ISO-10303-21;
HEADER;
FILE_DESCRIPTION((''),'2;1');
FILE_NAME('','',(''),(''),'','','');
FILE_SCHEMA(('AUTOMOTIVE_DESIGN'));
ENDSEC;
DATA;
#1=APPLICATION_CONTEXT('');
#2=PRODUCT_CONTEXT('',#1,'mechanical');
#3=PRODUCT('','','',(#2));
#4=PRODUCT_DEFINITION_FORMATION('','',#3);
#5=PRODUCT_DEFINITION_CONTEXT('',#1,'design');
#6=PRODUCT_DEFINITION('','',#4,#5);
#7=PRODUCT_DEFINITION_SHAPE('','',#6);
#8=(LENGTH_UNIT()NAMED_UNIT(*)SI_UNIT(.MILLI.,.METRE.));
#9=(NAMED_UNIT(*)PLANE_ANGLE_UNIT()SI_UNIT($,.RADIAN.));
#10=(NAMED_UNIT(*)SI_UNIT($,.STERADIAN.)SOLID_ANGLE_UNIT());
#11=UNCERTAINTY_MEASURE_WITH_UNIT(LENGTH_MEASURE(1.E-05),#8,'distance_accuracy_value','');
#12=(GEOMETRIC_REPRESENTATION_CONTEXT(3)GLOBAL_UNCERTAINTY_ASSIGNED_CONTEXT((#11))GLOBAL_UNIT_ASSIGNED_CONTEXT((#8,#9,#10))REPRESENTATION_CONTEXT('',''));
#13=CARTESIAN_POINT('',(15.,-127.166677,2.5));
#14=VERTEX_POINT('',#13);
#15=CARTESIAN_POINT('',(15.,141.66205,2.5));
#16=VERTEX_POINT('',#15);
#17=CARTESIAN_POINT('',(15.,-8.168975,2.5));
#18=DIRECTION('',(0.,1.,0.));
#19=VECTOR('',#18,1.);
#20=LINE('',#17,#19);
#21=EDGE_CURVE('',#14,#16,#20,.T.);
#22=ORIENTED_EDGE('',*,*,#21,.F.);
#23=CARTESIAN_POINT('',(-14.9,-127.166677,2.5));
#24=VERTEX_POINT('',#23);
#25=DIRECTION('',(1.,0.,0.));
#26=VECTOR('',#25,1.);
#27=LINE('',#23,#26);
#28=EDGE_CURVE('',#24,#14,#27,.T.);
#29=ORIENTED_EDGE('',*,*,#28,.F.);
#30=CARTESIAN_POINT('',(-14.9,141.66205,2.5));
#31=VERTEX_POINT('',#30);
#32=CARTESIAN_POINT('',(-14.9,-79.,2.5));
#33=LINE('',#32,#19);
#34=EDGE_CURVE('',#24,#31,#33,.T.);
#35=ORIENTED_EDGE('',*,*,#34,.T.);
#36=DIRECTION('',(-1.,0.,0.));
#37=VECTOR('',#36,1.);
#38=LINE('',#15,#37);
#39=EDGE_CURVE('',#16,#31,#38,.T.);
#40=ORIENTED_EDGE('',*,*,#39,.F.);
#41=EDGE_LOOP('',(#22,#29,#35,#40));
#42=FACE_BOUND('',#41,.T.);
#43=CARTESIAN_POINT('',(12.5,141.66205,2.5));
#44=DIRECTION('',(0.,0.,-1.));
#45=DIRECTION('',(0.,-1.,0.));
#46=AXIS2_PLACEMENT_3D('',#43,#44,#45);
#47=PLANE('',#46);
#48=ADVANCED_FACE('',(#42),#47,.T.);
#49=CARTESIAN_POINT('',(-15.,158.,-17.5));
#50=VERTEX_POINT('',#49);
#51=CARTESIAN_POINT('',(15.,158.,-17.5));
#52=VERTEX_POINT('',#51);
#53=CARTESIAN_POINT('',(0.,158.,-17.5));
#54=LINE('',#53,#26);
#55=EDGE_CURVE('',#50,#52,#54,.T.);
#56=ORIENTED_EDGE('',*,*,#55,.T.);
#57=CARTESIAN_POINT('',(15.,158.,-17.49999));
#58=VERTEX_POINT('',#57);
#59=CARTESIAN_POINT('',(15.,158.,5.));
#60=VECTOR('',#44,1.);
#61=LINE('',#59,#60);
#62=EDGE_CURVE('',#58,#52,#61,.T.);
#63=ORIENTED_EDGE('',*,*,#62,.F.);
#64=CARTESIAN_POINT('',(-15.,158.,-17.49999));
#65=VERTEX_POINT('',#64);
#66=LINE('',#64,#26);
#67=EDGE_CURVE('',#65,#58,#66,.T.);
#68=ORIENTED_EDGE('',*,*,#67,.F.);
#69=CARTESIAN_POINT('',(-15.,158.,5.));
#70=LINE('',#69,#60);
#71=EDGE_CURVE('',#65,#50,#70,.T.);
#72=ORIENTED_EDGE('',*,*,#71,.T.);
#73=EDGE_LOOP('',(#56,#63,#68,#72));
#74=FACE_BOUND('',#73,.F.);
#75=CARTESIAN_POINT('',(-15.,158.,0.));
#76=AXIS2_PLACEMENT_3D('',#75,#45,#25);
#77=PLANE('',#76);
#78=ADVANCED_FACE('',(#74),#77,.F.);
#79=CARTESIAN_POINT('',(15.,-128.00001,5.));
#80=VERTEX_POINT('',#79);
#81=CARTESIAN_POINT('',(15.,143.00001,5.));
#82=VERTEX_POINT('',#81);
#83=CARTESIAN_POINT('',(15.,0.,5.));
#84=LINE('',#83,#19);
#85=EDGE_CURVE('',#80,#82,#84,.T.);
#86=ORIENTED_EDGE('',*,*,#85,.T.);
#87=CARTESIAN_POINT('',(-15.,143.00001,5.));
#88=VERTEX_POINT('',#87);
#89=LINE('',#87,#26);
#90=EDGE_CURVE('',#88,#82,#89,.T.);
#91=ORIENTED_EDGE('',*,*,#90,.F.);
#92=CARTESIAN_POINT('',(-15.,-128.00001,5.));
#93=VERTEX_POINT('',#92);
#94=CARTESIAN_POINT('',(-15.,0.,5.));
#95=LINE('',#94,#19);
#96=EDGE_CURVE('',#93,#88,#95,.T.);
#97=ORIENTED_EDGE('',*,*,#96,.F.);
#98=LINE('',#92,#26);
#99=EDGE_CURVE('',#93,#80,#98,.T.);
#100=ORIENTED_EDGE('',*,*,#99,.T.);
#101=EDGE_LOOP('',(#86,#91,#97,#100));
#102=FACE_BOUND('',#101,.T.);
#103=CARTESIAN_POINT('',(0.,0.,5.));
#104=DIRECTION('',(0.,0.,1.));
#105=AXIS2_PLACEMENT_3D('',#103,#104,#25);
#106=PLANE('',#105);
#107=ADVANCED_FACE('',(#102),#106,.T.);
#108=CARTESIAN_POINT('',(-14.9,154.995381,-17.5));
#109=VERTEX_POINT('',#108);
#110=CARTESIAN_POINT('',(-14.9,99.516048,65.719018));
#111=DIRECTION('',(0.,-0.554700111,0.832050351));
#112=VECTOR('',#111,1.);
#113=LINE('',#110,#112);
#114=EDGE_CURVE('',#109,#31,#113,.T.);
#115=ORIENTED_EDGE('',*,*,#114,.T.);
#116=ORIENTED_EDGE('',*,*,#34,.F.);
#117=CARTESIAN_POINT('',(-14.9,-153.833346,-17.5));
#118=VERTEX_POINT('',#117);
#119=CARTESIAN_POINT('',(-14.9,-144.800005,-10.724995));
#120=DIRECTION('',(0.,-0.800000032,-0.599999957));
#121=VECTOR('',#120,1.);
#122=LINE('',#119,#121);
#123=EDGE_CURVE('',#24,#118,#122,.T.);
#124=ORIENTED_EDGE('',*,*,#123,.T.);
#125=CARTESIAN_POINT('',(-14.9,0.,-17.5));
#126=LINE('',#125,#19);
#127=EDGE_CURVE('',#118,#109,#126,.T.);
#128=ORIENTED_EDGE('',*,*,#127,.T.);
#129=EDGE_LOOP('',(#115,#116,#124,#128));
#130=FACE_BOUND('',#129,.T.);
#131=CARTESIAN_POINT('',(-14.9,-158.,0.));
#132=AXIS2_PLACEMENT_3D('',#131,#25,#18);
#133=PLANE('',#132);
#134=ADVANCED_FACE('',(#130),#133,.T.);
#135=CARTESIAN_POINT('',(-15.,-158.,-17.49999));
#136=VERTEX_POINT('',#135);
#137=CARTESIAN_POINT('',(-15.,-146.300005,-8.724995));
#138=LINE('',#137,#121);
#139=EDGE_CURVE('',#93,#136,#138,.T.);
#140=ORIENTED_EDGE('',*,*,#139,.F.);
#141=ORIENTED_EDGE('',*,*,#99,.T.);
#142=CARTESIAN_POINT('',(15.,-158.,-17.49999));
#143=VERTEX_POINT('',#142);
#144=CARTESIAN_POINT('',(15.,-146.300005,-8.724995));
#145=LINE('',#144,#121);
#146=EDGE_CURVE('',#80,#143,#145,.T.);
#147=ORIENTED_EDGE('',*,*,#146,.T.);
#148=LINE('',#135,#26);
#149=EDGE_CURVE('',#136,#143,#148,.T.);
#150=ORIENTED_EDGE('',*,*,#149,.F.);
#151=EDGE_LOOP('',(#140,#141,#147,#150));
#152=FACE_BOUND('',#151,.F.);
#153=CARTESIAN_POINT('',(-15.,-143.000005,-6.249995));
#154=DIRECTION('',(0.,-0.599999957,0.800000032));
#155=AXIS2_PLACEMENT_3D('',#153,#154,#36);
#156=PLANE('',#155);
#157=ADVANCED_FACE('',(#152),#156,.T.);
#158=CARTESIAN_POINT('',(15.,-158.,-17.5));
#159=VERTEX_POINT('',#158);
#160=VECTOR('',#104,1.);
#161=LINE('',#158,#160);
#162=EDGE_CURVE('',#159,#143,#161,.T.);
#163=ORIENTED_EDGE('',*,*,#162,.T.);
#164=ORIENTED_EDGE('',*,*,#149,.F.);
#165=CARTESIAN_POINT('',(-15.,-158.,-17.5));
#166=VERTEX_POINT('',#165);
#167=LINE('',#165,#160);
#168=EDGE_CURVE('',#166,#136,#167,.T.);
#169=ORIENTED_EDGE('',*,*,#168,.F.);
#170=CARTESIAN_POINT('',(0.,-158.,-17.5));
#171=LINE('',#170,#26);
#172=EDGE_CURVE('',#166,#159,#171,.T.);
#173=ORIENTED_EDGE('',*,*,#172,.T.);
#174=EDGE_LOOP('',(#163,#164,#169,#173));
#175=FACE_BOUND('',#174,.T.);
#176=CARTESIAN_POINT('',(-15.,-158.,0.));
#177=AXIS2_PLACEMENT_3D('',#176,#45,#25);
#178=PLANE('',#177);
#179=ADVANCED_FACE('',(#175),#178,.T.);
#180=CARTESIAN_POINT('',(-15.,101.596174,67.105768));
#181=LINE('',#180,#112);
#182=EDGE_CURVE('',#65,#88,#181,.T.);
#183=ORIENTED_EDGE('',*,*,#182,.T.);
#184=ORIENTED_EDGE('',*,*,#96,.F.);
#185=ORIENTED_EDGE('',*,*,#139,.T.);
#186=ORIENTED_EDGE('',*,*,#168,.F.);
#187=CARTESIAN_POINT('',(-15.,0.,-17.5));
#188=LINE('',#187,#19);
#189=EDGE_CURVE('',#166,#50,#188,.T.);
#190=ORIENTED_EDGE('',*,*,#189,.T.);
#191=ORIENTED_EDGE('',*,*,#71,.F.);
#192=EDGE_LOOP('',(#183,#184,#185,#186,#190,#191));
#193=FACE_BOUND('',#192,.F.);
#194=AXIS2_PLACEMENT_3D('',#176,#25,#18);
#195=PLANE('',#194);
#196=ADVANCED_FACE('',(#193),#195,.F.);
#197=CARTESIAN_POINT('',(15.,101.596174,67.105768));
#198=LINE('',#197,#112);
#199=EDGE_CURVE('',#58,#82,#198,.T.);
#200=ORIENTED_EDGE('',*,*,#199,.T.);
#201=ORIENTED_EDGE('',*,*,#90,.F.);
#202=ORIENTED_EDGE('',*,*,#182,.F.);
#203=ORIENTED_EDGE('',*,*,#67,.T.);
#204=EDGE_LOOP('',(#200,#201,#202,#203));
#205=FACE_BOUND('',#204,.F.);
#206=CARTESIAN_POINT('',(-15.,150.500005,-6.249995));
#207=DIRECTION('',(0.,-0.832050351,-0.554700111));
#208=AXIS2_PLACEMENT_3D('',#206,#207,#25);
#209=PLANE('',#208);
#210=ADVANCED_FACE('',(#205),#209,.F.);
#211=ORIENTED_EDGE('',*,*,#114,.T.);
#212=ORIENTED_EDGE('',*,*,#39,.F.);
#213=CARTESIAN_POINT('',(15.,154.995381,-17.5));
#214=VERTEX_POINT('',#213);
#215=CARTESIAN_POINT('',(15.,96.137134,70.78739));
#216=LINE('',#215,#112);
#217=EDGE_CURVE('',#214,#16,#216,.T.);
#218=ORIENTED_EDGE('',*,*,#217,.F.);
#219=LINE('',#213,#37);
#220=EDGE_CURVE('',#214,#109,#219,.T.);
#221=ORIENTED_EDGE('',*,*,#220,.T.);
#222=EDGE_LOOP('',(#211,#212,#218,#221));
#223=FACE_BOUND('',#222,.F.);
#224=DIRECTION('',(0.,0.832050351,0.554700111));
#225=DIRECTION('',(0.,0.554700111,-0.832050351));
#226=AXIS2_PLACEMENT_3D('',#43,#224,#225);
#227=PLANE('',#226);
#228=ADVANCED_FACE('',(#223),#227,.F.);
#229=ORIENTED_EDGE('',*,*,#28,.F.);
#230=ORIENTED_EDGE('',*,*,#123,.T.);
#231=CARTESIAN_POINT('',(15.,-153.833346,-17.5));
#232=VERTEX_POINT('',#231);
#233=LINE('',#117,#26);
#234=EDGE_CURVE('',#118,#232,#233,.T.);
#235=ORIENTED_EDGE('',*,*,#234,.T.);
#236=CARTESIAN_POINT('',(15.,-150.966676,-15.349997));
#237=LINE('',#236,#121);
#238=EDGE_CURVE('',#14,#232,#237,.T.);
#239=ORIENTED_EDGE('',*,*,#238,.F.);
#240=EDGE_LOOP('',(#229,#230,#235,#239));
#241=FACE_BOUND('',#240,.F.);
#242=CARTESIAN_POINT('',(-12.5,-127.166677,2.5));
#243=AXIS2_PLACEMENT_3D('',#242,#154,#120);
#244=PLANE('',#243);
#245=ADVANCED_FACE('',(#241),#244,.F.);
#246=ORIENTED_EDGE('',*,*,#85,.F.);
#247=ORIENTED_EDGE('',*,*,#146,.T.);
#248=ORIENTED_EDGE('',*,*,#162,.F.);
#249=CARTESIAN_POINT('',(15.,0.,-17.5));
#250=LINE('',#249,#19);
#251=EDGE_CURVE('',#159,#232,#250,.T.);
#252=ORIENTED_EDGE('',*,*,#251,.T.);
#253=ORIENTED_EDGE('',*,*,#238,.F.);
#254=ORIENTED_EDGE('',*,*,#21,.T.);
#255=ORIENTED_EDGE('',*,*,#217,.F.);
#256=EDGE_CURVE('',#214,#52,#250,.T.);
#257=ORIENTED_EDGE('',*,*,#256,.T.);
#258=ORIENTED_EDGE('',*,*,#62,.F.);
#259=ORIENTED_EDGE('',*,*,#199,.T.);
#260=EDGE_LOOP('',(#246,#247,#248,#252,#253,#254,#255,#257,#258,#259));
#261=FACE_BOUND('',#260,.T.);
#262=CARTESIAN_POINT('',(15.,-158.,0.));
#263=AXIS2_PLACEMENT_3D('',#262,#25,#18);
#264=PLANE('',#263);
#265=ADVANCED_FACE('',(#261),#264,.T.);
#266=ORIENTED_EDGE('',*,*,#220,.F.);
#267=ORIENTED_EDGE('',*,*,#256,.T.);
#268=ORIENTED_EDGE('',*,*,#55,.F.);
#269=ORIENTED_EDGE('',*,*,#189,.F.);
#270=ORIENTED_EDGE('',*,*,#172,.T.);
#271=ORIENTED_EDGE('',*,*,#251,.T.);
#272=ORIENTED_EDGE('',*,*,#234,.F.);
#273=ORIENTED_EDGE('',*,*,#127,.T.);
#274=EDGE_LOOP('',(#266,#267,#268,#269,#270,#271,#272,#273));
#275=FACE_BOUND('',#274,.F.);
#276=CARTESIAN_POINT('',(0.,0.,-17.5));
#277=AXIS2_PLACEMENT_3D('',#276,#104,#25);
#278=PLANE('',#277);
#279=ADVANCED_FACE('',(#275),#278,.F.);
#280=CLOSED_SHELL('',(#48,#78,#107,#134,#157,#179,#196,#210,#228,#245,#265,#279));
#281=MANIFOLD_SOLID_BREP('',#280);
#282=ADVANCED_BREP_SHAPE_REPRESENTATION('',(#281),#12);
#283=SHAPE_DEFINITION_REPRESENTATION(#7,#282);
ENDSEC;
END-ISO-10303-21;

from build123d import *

# Parameters (mm, degrees)
F0_W     = 30
F0_H     = 316
F1_DEPTH = 5
F2_DEPTH = 17.5
F3_SIZE2 = 14.99999
F3_SIZE  = 22.49999
F4_SIZE2 = 22.49999
F4_SIZE  = 29.99999
F5_T     = 2.5
F6_DEPTH = 2.4
F7_DEPTH = 25


# Not quite as in the source:
# - a fillet or chamfer is up to 0.001 mm smaller than in the source, because OpenCascade refuses the exact size
# - a shell that OpenCascade refuses in one call is made with other operations: the cavity is built on its own and cut out


with BuildPart() as f1:
    # F0 (on Top) → F1 (new body)
    with BuildSketch(Plane.XY):
        Rectangle(F0_W, F0_H)
    extrude(amount=F1_DEPTH)

    # F2 (add): a face of the model
    f2_faces = [f1.faces().sort_by_distance(p)[0] for p in [
        (0, 0, 0),
    ]]
    extrude(f2_faces, amount=F2_DEPTH)

    # F3 (size 22.5 and 15 in the source; OpenCascade refuses exactly that, so slightly less here)
    f3_edges = [f1.edges().sort_by_distance(p)[0] for p in [
        (0, 158, 5),
    ]]
    f3_side = f1.faces().sort_by_distance((0, 158, -6.25))[0]
    chamfer(f3_edges, length=F3_SIZE, length2=F3_SIZE2, reference=f3_side)

    # F4 (size 30 and 22.5 in the source; OpenCascade refuses exactly that, so slightly less here)
    f4_edges = [f1.edges().sort_by_distance(p)[0] for p in [
        (0, -158, 5),
    ]]
    f4_side = f1.faces().sort_by_distance((0, -7.499995, 5))[0]
    chamfer(f4_edges, length=F4_SIZE, length2=F4_SIZE2, reference=f4_side)

    # F5: shell of thickness 2.5, made by hand


with BuildPart() as f5_core1:
    # F5_t2: copy of F1
    add(f1.part)

    # the walls: a layer under each face that stays
    f5_faces = [f5_core1.faces().sort_by_distance(p)[0] for p in [
        (15, 0, -6.25),
        (0, 7.5, 5),
        (0, -143.000005, -6.249995),
        (0, 150.500005, -6.249995),
        (0, -158, -17.499995),
        (0, 158, -17.499995),
        (-15, 0, -6.25),
    ]]
    thicken(f5_faces, amount=-F5_T, mode=Mode.SUBTRACT)


with BuildPart() as f1_1:
    add(f1.part)

    # what is left inside the walls is the cavity
    f5_cavity = [f5_core1.part.solids().sort_by_distance(p)[0] for p in [
        (0, -50.890437, -17.475),
    ]]
    add(f5_cavity, mode=Mode.SUBTRACT)

    # F6 (cut): a face of the model
    f6_faces = [f1_1.faces().sort_by_distance(p)[0] for p in [
        (-12.5, 3.8374129004, -7.7308172989),
    ]]
    extrude(f6_faces, amount=-F6_DEPTH, mode=Mode.SUBTRACT)

    # F7 (cut): a face of the model
    f7_faces = [f1_1.faces().sort_by_distance(p)[0] for p in [
        (12.5, 3.8374129004, -7.7308172989),
    ]]
    extrude(f7_faces, amount=-F7_DEPTH, mode=Mode.SUBTRACT)


solid = f1_1.part
